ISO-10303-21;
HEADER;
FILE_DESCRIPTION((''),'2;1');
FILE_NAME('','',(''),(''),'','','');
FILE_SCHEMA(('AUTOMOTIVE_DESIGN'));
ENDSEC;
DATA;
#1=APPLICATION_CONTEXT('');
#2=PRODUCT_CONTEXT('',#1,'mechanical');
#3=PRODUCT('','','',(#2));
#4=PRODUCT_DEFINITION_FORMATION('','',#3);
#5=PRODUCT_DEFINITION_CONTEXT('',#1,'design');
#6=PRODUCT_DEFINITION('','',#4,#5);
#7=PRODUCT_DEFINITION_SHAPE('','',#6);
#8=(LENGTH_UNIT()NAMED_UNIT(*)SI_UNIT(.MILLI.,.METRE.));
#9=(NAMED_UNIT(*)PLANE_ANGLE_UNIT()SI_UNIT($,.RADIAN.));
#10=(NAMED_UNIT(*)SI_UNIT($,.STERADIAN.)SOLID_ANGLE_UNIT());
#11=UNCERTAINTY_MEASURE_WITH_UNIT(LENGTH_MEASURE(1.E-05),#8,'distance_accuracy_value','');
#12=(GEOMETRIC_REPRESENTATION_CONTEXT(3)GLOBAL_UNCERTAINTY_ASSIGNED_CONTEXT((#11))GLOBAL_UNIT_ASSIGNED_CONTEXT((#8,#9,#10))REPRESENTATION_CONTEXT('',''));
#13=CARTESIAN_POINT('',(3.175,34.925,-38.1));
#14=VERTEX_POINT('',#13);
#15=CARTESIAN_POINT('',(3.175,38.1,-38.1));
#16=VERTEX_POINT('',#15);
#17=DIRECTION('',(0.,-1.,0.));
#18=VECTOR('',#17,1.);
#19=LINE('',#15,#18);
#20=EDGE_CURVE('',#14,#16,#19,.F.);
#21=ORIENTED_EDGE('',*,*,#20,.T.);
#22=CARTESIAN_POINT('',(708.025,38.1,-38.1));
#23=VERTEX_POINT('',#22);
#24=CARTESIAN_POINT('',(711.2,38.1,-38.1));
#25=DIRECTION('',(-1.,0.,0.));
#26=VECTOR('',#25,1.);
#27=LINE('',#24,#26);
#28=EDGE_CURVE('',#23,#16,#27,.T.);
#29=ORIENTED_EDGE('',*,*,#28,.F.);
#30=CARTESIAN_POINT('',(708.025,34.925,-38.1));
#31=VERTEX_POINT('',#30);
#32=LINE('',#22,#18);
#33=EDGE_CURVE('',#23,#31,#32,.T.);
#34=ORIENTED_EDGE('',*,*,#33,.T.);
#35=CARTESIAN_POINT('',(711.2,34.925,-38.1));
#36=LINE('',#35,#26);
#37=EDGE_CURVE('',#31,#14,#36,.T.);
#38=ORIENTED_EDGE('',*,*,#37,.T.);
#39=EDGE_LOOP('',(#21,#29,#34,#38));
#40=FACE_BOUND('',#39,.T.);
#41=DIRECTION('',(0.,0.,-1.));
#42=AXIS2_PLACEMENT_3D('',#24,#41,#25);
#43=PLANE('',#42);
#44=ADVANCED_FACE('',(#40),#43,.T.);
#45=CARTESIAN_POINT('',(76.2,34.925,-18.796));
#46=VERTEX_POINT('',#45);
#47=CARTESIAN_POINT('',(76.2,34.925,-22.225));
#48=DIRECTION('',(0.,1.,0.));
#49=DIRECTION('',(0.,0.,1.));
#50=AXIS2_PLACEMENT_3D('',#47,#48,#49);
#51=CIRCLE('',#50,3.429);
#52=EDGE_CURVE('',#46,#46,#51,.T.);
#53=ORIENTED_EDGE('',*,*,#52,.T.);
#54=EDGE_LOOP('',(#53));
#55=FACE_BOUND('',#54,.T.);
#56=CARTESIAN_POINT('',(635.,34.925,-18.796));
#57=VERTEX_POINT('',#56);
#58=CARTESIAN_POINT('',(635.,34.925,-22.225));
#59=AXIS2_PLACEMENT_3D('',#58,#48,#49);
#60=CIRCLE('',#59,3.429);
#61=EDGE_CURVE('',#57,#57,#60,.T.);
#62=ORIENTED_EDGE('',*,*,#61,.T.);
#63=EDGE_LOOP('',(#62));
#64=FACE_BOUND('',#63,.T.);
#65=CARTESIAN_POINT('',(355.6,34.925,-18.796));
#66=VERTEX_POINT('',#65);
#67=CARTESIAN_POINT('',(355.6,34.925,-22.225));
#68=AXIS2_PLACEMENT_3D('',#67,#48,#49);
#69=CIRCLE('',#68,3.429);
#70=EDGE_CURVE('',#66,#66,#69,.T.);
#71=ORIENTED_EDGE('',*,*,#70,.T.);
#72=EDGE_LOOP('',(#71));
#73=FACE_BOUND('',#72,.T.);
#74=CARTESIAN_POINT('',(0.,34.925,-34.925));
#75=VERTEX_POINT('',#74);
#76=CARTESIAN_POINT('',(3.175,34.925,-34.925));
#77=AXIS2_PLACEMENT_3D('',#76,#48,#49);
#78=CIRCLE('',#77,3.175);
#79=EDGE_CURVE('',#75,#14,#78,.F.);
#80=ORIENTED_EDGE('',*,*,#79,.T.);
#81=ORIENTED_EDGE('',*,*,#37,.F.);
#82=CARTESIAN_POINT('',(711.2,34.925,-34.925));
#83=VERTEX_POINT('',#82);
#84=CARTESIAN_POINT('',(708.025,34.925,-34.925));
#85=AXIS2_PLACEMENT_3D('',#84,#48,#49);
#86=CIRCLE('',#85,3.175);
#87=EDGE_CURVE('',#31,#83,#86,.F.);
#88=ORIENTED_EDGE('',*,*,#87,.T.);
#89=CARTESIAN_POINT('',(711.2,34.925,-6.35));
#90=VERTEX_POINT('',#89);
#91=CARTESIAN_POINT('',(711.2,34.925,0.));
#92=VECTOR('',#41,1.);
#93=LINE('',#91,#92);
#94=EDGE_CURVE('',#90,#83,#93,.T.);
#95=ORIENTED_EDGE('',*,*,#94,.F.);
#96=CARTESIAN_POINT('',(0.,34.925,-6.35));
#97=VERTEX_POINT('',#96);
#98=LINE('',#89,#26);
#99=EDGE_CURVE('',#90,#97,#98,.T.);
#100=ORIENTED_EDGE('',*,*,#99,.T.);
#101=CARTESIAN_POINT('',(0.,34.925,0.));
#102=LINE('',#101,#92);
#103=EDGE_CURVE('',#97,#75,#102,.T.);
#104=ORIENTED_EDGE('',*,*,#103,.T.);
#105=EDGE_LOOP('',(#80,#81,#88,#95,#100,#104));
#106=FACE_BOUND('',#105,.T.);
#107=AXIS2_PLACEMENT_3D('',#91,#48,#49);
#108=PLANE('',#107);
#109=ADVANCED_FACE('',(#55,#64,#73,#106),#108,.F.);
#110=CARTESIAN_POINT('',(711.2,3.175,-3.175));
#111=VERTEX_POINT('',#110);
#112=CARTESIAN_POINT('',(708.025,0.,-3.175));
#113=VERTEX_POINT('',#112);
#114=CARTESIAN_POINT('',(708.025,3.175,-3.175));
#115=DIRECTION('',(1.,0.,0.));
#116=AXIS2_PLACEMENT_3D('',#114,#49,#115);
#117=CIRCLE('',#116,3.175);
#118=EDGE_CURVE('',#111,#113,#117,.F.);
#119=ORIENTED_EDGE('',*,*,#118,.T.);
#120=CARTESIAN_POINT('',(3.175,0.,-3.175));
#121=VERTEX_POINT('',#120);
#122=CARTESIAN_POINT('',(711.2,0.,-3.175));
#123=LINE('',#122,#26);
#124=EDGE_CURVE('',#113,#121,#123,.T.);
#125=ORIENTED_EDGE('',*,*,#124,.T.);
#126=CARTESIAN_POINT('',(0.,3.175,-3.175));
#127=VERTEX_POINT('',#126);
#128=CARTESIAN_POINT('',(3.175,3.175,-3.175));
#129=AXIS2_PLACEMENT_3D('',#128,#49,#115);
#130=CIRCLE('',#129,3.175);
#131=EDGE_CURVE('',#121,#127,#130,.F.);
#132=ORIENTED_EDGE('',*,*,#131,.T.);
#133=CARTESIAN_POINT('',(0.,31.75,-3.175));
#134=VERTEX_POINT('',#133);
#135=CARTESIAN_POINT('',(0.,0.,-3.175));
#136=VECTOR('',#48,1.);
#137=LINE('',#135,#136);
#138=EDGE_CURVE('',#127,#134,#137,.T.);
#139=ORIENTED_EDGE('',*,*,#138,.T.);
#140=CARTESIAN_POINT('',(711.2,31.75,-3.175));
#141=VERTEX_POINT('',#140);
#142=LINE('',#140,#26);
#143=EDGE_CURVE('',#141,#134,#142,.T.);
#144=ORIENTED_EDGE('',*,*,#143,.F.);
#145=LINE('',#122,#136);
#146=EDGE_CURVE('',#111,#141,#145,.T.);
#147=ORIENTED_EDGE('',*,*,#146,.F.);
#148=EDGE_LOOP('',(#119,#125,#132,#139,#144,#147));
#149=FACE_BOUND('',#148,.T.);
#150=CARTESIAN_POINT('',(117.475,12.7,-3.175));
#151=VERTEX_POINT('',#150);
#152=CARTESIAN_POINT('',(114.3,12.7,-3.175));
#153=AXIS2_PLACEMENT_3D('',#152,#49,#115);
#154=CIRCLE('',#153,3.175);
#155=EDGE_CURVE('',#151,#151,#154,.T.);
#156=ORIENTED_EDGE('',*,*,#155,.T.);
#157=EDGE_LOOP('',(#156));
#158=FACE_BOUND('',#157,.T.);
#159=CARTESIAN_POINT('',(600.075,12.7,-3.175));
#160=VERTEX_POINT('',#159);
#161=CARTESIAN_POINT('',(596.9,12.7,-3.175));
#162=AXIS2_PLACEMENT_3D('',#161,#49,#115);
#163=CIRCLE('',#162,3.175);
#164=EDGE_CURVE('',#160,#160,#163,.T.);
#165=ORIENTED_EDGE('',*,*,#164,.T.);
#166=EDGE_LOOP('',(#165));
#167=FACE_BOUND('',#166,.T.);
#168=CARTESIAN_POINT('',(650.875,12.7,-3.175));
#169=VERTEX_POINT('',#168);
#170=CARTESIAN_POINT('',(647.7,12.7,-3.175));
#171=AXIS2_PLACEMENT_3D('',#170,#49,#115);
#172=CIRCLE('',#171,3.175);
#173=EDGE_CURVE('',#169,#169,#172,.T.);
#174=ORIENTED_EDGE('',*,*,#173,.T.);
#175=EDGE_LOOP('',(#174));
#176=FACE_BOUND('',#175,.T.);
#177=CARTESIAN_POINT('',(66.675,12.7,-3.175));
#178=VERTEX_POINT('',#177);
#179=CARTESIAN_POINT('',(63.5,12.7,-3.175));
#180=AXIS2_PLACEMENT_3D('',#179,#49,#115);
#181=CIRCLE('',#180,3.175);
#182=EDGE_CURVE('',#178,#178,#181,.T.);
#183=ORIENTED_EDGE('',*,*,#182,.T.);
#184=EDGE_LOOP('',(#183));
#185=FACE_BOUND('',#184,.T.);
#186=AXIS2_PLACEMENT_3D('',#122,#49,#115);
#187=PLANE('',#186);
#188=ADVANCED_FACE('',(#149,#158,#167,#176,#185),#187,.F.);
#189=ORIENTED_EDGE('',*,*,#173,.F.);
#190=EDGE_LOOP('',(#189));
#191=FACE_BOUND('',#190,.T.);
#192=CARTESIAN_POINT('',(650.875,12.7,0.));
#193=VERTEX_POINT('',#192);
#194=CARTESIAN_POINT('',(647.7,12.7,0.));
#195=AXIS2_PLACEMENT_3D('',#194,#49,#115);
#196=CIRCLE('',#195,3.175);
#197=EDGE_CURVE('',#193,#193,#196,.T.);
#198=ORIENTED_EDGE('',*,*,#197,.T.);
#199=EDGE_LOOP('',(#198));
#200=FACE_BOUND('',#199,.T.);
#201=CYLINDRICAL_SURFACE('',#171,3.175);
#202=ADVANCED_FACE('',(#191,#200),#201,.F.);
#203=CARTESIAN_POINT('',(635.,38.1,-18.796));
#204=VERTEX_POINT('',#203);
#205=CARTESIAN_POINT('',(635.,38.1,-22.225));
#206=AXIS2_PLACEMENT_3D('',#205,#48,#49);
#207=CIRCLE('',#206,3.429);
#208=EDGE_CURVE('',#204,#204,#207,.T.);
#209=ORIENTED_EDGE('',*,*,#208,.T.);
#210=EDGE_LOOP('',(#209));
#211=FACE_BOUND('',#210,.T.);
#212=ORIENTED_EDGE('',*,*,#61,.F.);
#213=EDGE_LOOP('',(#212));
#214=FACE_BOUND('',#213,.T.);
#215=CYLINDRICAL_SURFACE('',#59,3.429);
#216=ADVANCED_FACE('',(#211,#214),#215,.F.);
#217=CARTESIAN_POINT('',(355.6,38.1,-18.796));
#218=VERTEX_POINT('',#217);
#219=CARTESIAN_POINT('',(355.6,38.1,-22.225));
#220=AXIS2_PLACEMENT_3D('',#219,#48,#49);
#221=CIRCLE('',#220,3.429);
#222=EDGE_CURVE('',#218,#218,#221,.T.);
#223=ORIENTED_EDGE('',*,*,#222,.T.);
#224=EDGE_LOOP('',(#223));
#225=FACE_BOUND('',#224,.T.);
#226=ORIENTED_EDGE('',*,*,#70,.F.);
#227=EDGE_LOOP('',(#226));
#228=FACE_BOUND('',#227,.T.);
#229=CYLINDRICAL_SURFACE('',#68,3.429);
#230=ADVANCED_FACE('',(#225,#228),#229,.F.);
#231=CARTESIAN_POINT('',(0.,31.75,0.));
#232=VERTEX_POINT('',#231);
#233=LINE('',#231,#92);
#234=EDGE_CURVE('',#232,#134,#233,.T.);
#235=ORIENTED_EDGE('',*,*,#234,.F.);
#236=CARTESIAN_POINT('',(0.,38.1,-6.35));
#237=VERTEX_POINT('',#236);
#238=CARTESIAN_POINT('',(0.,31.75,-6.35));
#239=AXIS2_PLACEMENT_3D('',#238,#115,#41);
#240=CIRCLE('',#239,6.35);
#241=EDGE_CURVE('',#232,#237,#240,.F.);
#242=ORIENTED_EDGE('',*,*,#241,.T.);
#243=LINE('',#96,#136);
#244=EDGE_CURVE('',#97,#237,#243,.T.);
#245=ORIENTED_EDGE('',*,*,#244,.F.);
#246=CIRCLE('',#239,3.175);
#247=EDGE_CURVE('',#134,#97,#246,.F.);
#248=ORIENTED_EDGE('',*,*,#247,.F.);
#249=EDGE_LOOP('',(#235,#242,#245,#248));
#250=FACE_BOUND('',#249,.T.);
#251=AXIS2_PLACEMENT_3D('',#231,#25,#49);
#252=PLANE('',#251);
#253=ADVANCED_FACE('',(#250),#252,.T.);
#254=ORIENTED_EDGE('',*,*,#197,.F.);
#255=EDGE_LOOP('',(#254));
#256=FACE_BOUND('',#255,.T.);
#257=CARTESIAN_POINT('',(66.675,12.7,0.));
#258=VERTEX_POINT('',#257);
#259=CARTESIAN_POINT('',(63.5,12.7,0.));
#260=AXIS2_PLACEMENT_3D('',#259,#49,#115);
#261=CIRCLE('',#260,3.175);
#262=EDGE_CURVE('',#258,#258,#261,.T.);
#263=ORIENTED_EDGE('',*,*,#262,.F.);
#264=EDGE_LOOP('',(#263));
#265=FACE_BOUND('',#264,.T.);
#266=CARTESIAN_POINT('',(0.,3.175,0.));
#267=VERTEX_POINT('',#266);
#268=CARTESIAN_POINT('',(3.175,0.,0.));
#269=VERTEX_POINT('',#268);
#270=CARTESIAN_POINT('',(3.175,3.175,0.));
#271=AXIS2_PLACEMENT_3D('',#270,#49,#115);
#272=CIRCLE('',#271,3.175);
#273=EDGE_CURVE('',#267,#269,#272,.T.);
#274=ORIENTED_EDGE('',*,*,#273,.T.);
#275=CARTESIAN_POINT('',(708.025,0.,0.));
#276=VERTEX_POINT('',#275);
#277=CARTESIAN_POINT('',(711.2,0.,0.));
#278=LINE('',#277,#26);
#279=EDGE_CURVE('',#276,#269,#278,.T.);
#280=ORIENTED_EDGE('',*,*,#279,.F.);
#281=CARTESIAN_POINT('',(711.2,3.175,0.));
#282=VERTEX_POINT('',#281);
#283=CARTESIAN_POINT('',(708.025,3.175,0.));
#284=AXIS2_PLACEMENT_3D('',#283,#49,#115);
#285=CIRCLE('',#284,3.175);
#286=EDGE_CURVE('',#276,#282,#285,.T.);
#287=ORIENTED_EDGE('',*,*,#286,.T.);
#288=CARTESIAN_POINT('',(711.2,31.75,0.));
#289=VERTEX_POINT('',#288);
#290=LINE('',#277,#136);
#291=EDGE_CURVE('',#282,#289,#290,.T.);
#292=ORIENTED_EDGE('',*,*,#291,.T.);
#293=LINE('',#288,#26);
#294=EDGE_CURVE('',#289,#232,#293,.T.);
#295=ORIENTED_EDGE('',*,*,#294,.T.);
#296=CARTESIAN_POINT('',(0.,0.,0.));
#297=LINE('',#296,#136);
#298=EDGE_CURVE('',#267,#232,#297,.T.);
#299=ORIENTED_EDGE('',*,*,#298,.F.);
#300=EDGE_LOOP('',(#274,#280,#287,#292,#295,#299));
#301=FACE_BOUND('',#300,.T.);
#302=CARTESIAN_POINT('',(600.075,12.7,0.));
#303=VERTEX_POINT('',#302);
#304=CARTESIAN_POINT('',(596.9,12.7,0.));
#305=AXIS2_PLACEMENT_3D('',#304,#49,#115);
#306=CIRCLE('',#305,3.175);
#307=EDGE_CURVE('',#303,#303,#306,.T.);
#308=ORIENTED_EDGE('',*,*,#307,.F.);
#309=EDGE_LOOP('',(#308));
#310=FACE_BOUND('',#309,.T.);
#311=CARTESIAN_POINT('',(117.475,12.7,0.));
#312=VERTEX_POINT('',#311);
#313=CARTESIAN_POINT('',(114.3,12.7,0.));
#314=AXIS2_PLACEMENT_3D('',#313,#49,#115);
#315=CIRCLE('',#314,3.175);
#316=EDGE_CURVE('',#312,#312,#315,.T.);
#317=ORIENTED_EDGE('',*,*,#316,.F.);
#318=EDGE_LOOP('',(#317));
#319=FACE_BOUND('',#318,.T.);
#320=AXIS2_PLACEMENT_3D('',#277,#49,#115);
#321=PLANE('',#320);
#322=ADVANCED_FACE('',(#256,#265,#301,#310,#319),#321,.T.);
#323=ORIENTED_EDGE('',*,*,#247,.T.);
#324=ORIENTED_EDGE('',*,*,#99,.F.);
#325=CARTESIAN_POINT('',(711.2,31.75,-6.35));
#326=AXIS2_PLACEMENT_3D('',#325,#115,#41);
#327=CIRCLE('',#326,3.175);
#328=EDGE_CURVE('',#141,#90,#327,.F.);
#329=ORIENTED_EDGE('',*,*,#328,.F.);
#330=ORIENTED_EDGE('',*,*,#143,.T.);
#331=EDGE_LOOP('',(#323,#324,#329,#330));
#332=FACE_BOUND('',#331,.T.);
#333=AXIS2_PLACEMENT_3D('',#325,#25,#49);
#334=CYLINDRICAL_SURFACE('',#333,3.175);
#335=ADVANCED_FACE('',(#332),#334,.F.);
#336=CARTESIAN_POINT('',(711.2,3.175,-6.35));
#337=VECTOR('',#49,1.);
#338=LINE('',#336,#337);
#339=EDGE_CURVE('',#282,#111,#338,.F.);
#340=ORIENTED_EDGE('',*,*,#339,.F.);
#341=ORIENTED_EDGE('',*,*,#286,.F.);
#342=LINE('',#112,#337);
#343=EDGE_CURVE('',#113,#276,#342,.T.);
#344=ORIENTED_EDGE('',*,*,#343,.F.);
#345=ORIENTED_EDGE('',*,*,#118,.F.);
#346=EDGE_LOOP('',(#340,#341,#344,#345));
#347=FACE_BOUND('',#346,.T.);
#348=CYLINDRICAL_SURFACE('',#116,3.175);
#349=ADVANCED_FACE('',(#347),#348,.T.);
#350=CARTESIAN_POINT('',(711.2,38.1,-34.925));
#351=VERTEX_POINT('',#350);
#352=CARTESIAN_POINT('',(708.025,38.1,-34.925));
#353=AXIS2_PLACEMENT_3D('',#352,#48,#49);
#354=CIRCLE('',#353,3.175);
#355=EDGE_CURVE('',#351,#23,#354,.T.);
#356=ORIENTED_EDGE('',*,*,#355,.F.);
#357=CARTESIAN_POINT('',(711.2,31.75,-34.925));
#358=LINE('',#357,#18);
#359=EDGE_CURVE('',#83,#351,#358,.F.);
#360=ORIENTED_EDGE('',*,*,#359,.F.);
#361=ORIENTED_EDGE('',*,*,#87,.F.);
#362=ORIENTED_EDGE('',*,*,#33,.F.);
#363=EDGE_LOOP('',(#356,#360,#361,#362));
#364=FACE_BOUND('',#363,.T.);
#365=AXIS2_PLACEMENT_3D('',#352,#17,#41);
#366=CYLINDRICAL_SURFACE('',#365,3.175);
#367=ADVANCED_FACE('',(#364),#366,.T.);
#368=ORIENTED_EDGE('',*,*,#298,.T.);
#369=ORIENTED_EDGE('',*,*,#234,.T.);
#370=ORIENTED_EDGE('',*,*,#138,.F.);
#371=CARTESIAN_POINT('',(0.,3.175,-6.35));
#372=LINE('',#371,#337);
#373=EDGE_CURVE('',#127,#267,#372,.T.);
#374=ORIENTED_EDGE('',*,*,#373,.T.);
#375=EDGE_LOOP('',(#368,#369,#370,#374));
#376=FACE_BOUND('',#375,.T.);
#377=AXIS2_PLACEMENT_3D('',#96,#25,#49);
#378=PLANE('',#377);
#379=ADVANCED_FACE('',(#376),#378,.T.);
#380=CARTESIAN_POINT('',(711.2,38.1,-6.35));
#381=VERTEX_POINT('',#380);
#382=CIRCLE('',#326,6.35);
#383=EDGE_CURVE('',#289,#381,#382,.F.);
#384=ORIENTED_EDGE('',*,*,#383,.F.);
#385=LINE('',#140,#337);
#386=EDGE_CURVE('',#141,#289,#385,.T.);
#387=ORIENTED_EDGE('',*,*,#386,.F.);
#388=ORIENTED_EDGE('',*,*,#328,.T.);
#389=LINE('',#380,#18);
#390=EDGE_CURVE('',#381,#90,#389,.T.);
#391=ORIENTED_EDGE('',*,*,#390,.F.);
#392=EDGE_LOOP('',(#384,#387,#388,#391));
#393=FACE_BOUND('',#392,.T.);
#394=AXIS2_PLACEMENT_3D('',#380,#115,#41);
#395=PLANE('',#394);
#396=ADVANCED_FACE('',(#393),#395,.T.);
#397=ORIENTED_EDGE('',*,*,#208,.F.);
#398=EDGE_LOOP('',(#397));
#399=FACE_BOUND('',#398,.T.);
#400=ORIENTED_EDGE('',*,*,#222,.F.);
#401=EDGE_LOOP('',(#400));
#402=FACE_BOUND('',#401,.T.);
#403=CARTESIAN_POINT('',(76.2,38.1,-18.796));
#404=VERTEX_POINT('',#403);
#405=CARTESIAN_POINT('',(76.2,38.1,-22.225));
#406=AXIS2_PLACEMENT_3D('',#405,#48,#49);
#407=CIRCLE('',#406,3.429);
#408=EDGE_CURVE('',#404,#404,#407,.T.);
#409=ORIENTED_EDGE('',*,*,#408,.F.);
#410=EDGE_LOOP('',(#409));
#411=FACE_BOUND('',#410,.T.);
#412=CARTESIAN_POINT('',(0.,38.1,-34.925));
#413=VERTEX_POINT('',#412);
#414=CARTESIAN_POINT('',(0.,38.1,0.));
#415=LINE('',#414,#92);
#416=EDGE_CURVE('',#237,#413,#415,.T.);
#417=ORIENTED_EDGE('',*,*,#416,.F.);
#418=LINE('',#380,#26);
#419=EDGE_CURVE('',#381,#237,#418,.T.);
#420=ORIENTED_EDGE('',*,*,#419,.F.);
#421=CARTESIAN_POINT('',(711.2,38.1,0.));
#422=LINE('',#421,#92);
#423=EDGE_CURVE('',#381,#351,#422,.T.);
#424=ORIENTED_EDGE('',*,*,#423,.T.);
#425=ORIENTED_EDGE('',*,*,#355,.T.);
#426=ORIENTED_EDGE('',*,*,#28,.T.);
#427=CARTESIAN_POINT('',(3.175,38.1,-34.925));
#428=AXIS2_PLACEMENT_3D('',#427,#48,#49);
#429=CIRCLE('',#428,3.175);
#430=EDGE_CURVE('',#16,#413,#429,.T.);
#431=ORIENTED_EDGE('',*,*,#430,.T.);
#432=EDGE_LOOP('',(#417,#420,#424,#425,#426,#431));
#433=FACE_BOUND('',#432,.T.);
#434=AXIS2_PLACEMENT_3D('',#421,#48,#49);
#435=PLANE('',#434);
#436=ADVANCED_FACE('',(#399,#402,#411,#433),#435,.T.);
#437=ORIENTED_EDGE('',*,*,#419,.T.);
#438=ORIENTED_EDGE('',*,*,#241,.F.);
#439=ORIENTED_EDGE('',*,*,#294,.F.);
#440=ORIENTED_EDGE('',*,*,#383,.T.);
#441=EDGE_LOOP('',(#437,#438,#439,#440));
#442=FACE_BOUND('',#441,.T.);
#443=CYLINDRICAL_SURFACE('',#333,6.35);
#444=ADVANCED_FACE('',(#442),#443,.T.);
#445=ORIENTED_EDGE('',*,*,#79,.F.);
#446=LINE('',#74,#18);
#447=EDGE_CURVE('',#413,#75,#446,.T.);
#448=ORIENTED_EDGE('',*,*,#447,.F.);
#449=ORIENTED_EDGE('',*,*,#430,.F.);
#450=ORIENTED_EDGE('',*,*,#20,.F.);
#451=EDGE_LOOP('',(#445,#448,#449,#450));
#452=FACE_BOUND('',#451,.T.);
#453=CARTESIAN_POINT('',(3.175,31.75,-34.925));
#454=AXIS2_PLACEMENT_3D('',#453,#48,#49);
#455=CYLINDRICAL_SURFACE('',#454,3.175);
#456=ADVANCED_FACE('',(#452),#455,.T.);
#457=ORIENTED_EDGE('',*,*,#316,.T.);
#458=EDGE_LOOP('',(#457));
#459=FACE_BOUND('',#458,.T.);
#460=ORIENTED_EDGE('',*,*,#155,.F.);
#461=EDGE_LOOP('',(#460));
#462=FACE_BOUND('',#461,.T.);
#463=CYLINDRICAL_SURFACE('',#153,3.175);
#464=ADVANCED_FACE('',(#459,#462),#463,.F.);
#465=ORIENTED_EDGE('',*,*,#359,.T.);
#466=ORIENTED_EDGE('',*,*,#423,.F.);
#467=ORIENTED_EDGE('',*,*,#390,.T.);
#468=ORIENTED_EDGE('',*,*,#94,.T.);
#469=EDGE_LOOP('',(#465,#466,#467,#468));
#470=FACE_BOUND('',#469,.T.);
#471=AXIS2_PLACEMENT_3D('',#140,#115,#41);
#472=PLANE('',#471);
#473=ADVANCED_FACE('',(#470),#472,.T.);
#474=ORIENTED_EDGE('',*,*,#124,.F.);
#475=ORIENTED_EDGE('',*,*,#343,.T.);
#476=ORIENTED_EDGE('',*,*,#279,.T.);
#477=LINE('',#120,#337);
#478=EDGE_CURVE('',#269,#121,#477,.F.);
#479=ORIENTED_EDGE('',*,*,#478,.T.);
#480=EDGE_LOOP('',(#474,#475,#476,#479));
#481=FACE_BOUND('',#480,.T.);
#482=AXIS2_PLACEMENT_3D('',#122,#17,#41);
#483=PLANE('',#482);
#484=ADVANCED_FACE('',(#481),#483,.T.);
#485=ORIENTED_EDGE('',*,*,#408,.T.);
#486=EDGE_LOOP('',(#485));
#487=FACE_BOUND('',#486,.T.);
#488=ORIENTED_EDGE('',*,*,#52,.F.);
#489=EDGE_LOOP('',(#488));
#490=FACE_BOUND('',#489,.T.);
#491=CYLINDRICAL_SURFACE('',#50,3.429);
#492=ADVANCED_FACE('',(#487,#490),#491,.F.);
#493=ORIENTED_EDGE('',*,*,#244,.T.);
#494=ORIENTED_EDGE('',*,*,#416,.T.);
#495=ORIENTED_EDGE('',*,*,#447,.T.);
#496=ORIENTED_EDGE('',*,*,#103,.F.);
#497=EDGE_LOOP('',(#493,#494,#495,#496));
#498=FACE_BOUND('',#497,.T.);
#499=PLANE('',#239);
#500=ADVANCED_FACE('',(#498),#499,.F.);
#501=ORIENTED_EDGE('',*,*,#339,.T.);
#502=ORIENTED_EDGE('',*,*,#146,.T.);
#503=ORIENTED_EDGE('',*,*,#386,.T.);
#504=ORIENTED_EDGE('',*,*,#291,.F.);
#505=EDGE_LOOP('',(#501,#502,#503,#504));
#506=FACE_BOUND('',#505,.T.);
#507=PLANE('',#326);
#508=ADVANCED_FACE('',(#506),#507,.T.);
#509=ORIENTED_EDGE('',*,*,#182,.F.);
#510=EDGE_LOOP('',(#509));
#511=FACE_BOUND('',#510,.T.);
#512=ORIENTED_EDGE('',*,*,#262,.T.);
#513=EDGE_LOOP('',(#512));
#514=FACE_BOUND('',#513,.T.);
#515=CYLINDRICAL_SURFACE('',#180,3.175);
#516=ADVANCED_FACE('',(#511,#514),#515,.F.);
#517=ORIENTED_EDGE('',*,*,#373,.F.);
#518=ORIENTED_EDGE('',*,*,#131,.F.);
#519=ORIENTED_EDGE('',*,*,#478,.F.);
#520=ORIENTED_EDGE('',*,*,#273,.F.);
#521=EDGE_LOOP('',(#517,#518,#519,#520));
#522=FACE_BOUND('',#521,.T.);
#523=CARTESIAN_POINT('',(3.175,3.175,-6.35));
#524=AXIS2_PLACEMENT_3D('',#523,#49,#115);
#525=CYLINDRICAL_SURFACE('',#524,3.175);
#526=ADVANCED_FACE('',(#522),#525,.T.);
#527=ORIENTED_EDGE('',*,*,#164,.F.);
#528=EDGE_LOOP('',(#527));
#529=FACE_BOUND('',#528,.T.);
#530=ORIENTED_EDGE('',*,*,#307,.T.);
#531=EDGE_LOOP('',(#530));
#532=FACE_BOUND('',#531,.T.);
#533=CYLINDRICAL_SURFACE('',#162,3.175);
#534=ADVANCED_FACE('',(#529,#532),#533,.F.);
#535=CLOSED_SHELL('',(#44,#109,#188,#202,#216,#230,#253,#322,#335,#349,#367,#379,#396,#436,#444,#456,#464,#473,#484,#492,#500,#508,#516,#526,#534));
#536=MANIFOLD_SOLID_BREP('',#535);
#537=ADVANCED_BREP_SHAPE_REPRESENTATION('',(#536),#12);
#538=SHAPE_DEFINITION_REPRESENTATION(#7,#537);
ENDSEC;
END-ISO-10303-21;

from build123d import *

# Parameters (mm, degrees)
BASE_FLANGE1_DEPTH = 711.2
SKETCH18_R         = 3.429
CUT_EXTRUDE1_DEPTH = 3.175
FILLET1_R          = 3.175
SKETCH20_R         = 3.175
CUT_EXTRUDE2_DEPTH = 3.175


# Sheet-metal steps are written as plain solids
with BuildPart() as part:
    # Sketch1 → Base-Flange1 (new body)
    with BuildSketch(Plane(origin=(0, 0, 0), x_dir=(0, 0, -1), z_dir=(1, 0, 0))):
        with BuildLine():
            Line((0, 0), (0, 31.75))
            ThreePointArc((0, 31.75), (1.859871939, 36.240128061), (6.35, 38.1))
            Line((6.35, 38.1), (38.1, 38.1))
            Line((38.1, 38.1), (38.1, 34.925))
            Line((38.1, 34.925), (6.35, 34.925))
            ThreePointArc((6.35, 34.925), (4.10493597, 33.99506403), (3.175, 31.75))
            Line((3.175, 31.75), (3.175, 0))
            Line((3.175, 0), (0, 0))
        make_face()
    extrude(amount=BASE_FLANGE1_DEPTH)

    # Sketch18 → Cut-Extrude1 (cut)
    with BuildSketch(Plane(origin=(0, 38.1, 0), x_dir=(1, 0, 0), z_dir=(0, 1, 0))):
        with Locations(Location((76.2, 22.225, 0), (0, 0, 270))):
            Circle(SKETCH18_R)
        with Locations(Location((355.6, 22.225, 0), (0, 0, 270))):
            Circle(SKETCH18_R)
        with Locations(Location((635, 22.225, 0), (0, 0, 270))):
            Circle(SKETCH18_R)
    extrude(amount=-CUT_EXTRUDE1_DEPTH, mode=Mode.SUBTRACT)

    # Fillet1
    fillet1_edges = [part.edges().sort_by_distance(p)[0] for p in [
        (711.2, 0, -1.5875),
        (0, 0, -1.5875),
        (711.2, 36.5125, -38.1),
        (0, 36.5125, -38.1),
    ]]
    fillet(fillet1_edges, radius=FILLET1_R)

    # Sketch20 → Cut-Extrude2 (cut)
    with BuildSketch(Plane.XY):
        with Locations((63.5, 12.7)):
            Circle(SKETCH20_R)
        with Locations((114.3, 12.7)):
            Circle(SKETCH20_R)
        with Locations((596.9, 12.7)):
            Circle(SKETCH20_R)
        with Locations((647.7, 12.7)):
            Circle(SKETCH20_R)
    extrude(amount=-CUT_EXTRUDE2_DEPTH, mode=Mode.SUBTRACT)


solid = part.part
